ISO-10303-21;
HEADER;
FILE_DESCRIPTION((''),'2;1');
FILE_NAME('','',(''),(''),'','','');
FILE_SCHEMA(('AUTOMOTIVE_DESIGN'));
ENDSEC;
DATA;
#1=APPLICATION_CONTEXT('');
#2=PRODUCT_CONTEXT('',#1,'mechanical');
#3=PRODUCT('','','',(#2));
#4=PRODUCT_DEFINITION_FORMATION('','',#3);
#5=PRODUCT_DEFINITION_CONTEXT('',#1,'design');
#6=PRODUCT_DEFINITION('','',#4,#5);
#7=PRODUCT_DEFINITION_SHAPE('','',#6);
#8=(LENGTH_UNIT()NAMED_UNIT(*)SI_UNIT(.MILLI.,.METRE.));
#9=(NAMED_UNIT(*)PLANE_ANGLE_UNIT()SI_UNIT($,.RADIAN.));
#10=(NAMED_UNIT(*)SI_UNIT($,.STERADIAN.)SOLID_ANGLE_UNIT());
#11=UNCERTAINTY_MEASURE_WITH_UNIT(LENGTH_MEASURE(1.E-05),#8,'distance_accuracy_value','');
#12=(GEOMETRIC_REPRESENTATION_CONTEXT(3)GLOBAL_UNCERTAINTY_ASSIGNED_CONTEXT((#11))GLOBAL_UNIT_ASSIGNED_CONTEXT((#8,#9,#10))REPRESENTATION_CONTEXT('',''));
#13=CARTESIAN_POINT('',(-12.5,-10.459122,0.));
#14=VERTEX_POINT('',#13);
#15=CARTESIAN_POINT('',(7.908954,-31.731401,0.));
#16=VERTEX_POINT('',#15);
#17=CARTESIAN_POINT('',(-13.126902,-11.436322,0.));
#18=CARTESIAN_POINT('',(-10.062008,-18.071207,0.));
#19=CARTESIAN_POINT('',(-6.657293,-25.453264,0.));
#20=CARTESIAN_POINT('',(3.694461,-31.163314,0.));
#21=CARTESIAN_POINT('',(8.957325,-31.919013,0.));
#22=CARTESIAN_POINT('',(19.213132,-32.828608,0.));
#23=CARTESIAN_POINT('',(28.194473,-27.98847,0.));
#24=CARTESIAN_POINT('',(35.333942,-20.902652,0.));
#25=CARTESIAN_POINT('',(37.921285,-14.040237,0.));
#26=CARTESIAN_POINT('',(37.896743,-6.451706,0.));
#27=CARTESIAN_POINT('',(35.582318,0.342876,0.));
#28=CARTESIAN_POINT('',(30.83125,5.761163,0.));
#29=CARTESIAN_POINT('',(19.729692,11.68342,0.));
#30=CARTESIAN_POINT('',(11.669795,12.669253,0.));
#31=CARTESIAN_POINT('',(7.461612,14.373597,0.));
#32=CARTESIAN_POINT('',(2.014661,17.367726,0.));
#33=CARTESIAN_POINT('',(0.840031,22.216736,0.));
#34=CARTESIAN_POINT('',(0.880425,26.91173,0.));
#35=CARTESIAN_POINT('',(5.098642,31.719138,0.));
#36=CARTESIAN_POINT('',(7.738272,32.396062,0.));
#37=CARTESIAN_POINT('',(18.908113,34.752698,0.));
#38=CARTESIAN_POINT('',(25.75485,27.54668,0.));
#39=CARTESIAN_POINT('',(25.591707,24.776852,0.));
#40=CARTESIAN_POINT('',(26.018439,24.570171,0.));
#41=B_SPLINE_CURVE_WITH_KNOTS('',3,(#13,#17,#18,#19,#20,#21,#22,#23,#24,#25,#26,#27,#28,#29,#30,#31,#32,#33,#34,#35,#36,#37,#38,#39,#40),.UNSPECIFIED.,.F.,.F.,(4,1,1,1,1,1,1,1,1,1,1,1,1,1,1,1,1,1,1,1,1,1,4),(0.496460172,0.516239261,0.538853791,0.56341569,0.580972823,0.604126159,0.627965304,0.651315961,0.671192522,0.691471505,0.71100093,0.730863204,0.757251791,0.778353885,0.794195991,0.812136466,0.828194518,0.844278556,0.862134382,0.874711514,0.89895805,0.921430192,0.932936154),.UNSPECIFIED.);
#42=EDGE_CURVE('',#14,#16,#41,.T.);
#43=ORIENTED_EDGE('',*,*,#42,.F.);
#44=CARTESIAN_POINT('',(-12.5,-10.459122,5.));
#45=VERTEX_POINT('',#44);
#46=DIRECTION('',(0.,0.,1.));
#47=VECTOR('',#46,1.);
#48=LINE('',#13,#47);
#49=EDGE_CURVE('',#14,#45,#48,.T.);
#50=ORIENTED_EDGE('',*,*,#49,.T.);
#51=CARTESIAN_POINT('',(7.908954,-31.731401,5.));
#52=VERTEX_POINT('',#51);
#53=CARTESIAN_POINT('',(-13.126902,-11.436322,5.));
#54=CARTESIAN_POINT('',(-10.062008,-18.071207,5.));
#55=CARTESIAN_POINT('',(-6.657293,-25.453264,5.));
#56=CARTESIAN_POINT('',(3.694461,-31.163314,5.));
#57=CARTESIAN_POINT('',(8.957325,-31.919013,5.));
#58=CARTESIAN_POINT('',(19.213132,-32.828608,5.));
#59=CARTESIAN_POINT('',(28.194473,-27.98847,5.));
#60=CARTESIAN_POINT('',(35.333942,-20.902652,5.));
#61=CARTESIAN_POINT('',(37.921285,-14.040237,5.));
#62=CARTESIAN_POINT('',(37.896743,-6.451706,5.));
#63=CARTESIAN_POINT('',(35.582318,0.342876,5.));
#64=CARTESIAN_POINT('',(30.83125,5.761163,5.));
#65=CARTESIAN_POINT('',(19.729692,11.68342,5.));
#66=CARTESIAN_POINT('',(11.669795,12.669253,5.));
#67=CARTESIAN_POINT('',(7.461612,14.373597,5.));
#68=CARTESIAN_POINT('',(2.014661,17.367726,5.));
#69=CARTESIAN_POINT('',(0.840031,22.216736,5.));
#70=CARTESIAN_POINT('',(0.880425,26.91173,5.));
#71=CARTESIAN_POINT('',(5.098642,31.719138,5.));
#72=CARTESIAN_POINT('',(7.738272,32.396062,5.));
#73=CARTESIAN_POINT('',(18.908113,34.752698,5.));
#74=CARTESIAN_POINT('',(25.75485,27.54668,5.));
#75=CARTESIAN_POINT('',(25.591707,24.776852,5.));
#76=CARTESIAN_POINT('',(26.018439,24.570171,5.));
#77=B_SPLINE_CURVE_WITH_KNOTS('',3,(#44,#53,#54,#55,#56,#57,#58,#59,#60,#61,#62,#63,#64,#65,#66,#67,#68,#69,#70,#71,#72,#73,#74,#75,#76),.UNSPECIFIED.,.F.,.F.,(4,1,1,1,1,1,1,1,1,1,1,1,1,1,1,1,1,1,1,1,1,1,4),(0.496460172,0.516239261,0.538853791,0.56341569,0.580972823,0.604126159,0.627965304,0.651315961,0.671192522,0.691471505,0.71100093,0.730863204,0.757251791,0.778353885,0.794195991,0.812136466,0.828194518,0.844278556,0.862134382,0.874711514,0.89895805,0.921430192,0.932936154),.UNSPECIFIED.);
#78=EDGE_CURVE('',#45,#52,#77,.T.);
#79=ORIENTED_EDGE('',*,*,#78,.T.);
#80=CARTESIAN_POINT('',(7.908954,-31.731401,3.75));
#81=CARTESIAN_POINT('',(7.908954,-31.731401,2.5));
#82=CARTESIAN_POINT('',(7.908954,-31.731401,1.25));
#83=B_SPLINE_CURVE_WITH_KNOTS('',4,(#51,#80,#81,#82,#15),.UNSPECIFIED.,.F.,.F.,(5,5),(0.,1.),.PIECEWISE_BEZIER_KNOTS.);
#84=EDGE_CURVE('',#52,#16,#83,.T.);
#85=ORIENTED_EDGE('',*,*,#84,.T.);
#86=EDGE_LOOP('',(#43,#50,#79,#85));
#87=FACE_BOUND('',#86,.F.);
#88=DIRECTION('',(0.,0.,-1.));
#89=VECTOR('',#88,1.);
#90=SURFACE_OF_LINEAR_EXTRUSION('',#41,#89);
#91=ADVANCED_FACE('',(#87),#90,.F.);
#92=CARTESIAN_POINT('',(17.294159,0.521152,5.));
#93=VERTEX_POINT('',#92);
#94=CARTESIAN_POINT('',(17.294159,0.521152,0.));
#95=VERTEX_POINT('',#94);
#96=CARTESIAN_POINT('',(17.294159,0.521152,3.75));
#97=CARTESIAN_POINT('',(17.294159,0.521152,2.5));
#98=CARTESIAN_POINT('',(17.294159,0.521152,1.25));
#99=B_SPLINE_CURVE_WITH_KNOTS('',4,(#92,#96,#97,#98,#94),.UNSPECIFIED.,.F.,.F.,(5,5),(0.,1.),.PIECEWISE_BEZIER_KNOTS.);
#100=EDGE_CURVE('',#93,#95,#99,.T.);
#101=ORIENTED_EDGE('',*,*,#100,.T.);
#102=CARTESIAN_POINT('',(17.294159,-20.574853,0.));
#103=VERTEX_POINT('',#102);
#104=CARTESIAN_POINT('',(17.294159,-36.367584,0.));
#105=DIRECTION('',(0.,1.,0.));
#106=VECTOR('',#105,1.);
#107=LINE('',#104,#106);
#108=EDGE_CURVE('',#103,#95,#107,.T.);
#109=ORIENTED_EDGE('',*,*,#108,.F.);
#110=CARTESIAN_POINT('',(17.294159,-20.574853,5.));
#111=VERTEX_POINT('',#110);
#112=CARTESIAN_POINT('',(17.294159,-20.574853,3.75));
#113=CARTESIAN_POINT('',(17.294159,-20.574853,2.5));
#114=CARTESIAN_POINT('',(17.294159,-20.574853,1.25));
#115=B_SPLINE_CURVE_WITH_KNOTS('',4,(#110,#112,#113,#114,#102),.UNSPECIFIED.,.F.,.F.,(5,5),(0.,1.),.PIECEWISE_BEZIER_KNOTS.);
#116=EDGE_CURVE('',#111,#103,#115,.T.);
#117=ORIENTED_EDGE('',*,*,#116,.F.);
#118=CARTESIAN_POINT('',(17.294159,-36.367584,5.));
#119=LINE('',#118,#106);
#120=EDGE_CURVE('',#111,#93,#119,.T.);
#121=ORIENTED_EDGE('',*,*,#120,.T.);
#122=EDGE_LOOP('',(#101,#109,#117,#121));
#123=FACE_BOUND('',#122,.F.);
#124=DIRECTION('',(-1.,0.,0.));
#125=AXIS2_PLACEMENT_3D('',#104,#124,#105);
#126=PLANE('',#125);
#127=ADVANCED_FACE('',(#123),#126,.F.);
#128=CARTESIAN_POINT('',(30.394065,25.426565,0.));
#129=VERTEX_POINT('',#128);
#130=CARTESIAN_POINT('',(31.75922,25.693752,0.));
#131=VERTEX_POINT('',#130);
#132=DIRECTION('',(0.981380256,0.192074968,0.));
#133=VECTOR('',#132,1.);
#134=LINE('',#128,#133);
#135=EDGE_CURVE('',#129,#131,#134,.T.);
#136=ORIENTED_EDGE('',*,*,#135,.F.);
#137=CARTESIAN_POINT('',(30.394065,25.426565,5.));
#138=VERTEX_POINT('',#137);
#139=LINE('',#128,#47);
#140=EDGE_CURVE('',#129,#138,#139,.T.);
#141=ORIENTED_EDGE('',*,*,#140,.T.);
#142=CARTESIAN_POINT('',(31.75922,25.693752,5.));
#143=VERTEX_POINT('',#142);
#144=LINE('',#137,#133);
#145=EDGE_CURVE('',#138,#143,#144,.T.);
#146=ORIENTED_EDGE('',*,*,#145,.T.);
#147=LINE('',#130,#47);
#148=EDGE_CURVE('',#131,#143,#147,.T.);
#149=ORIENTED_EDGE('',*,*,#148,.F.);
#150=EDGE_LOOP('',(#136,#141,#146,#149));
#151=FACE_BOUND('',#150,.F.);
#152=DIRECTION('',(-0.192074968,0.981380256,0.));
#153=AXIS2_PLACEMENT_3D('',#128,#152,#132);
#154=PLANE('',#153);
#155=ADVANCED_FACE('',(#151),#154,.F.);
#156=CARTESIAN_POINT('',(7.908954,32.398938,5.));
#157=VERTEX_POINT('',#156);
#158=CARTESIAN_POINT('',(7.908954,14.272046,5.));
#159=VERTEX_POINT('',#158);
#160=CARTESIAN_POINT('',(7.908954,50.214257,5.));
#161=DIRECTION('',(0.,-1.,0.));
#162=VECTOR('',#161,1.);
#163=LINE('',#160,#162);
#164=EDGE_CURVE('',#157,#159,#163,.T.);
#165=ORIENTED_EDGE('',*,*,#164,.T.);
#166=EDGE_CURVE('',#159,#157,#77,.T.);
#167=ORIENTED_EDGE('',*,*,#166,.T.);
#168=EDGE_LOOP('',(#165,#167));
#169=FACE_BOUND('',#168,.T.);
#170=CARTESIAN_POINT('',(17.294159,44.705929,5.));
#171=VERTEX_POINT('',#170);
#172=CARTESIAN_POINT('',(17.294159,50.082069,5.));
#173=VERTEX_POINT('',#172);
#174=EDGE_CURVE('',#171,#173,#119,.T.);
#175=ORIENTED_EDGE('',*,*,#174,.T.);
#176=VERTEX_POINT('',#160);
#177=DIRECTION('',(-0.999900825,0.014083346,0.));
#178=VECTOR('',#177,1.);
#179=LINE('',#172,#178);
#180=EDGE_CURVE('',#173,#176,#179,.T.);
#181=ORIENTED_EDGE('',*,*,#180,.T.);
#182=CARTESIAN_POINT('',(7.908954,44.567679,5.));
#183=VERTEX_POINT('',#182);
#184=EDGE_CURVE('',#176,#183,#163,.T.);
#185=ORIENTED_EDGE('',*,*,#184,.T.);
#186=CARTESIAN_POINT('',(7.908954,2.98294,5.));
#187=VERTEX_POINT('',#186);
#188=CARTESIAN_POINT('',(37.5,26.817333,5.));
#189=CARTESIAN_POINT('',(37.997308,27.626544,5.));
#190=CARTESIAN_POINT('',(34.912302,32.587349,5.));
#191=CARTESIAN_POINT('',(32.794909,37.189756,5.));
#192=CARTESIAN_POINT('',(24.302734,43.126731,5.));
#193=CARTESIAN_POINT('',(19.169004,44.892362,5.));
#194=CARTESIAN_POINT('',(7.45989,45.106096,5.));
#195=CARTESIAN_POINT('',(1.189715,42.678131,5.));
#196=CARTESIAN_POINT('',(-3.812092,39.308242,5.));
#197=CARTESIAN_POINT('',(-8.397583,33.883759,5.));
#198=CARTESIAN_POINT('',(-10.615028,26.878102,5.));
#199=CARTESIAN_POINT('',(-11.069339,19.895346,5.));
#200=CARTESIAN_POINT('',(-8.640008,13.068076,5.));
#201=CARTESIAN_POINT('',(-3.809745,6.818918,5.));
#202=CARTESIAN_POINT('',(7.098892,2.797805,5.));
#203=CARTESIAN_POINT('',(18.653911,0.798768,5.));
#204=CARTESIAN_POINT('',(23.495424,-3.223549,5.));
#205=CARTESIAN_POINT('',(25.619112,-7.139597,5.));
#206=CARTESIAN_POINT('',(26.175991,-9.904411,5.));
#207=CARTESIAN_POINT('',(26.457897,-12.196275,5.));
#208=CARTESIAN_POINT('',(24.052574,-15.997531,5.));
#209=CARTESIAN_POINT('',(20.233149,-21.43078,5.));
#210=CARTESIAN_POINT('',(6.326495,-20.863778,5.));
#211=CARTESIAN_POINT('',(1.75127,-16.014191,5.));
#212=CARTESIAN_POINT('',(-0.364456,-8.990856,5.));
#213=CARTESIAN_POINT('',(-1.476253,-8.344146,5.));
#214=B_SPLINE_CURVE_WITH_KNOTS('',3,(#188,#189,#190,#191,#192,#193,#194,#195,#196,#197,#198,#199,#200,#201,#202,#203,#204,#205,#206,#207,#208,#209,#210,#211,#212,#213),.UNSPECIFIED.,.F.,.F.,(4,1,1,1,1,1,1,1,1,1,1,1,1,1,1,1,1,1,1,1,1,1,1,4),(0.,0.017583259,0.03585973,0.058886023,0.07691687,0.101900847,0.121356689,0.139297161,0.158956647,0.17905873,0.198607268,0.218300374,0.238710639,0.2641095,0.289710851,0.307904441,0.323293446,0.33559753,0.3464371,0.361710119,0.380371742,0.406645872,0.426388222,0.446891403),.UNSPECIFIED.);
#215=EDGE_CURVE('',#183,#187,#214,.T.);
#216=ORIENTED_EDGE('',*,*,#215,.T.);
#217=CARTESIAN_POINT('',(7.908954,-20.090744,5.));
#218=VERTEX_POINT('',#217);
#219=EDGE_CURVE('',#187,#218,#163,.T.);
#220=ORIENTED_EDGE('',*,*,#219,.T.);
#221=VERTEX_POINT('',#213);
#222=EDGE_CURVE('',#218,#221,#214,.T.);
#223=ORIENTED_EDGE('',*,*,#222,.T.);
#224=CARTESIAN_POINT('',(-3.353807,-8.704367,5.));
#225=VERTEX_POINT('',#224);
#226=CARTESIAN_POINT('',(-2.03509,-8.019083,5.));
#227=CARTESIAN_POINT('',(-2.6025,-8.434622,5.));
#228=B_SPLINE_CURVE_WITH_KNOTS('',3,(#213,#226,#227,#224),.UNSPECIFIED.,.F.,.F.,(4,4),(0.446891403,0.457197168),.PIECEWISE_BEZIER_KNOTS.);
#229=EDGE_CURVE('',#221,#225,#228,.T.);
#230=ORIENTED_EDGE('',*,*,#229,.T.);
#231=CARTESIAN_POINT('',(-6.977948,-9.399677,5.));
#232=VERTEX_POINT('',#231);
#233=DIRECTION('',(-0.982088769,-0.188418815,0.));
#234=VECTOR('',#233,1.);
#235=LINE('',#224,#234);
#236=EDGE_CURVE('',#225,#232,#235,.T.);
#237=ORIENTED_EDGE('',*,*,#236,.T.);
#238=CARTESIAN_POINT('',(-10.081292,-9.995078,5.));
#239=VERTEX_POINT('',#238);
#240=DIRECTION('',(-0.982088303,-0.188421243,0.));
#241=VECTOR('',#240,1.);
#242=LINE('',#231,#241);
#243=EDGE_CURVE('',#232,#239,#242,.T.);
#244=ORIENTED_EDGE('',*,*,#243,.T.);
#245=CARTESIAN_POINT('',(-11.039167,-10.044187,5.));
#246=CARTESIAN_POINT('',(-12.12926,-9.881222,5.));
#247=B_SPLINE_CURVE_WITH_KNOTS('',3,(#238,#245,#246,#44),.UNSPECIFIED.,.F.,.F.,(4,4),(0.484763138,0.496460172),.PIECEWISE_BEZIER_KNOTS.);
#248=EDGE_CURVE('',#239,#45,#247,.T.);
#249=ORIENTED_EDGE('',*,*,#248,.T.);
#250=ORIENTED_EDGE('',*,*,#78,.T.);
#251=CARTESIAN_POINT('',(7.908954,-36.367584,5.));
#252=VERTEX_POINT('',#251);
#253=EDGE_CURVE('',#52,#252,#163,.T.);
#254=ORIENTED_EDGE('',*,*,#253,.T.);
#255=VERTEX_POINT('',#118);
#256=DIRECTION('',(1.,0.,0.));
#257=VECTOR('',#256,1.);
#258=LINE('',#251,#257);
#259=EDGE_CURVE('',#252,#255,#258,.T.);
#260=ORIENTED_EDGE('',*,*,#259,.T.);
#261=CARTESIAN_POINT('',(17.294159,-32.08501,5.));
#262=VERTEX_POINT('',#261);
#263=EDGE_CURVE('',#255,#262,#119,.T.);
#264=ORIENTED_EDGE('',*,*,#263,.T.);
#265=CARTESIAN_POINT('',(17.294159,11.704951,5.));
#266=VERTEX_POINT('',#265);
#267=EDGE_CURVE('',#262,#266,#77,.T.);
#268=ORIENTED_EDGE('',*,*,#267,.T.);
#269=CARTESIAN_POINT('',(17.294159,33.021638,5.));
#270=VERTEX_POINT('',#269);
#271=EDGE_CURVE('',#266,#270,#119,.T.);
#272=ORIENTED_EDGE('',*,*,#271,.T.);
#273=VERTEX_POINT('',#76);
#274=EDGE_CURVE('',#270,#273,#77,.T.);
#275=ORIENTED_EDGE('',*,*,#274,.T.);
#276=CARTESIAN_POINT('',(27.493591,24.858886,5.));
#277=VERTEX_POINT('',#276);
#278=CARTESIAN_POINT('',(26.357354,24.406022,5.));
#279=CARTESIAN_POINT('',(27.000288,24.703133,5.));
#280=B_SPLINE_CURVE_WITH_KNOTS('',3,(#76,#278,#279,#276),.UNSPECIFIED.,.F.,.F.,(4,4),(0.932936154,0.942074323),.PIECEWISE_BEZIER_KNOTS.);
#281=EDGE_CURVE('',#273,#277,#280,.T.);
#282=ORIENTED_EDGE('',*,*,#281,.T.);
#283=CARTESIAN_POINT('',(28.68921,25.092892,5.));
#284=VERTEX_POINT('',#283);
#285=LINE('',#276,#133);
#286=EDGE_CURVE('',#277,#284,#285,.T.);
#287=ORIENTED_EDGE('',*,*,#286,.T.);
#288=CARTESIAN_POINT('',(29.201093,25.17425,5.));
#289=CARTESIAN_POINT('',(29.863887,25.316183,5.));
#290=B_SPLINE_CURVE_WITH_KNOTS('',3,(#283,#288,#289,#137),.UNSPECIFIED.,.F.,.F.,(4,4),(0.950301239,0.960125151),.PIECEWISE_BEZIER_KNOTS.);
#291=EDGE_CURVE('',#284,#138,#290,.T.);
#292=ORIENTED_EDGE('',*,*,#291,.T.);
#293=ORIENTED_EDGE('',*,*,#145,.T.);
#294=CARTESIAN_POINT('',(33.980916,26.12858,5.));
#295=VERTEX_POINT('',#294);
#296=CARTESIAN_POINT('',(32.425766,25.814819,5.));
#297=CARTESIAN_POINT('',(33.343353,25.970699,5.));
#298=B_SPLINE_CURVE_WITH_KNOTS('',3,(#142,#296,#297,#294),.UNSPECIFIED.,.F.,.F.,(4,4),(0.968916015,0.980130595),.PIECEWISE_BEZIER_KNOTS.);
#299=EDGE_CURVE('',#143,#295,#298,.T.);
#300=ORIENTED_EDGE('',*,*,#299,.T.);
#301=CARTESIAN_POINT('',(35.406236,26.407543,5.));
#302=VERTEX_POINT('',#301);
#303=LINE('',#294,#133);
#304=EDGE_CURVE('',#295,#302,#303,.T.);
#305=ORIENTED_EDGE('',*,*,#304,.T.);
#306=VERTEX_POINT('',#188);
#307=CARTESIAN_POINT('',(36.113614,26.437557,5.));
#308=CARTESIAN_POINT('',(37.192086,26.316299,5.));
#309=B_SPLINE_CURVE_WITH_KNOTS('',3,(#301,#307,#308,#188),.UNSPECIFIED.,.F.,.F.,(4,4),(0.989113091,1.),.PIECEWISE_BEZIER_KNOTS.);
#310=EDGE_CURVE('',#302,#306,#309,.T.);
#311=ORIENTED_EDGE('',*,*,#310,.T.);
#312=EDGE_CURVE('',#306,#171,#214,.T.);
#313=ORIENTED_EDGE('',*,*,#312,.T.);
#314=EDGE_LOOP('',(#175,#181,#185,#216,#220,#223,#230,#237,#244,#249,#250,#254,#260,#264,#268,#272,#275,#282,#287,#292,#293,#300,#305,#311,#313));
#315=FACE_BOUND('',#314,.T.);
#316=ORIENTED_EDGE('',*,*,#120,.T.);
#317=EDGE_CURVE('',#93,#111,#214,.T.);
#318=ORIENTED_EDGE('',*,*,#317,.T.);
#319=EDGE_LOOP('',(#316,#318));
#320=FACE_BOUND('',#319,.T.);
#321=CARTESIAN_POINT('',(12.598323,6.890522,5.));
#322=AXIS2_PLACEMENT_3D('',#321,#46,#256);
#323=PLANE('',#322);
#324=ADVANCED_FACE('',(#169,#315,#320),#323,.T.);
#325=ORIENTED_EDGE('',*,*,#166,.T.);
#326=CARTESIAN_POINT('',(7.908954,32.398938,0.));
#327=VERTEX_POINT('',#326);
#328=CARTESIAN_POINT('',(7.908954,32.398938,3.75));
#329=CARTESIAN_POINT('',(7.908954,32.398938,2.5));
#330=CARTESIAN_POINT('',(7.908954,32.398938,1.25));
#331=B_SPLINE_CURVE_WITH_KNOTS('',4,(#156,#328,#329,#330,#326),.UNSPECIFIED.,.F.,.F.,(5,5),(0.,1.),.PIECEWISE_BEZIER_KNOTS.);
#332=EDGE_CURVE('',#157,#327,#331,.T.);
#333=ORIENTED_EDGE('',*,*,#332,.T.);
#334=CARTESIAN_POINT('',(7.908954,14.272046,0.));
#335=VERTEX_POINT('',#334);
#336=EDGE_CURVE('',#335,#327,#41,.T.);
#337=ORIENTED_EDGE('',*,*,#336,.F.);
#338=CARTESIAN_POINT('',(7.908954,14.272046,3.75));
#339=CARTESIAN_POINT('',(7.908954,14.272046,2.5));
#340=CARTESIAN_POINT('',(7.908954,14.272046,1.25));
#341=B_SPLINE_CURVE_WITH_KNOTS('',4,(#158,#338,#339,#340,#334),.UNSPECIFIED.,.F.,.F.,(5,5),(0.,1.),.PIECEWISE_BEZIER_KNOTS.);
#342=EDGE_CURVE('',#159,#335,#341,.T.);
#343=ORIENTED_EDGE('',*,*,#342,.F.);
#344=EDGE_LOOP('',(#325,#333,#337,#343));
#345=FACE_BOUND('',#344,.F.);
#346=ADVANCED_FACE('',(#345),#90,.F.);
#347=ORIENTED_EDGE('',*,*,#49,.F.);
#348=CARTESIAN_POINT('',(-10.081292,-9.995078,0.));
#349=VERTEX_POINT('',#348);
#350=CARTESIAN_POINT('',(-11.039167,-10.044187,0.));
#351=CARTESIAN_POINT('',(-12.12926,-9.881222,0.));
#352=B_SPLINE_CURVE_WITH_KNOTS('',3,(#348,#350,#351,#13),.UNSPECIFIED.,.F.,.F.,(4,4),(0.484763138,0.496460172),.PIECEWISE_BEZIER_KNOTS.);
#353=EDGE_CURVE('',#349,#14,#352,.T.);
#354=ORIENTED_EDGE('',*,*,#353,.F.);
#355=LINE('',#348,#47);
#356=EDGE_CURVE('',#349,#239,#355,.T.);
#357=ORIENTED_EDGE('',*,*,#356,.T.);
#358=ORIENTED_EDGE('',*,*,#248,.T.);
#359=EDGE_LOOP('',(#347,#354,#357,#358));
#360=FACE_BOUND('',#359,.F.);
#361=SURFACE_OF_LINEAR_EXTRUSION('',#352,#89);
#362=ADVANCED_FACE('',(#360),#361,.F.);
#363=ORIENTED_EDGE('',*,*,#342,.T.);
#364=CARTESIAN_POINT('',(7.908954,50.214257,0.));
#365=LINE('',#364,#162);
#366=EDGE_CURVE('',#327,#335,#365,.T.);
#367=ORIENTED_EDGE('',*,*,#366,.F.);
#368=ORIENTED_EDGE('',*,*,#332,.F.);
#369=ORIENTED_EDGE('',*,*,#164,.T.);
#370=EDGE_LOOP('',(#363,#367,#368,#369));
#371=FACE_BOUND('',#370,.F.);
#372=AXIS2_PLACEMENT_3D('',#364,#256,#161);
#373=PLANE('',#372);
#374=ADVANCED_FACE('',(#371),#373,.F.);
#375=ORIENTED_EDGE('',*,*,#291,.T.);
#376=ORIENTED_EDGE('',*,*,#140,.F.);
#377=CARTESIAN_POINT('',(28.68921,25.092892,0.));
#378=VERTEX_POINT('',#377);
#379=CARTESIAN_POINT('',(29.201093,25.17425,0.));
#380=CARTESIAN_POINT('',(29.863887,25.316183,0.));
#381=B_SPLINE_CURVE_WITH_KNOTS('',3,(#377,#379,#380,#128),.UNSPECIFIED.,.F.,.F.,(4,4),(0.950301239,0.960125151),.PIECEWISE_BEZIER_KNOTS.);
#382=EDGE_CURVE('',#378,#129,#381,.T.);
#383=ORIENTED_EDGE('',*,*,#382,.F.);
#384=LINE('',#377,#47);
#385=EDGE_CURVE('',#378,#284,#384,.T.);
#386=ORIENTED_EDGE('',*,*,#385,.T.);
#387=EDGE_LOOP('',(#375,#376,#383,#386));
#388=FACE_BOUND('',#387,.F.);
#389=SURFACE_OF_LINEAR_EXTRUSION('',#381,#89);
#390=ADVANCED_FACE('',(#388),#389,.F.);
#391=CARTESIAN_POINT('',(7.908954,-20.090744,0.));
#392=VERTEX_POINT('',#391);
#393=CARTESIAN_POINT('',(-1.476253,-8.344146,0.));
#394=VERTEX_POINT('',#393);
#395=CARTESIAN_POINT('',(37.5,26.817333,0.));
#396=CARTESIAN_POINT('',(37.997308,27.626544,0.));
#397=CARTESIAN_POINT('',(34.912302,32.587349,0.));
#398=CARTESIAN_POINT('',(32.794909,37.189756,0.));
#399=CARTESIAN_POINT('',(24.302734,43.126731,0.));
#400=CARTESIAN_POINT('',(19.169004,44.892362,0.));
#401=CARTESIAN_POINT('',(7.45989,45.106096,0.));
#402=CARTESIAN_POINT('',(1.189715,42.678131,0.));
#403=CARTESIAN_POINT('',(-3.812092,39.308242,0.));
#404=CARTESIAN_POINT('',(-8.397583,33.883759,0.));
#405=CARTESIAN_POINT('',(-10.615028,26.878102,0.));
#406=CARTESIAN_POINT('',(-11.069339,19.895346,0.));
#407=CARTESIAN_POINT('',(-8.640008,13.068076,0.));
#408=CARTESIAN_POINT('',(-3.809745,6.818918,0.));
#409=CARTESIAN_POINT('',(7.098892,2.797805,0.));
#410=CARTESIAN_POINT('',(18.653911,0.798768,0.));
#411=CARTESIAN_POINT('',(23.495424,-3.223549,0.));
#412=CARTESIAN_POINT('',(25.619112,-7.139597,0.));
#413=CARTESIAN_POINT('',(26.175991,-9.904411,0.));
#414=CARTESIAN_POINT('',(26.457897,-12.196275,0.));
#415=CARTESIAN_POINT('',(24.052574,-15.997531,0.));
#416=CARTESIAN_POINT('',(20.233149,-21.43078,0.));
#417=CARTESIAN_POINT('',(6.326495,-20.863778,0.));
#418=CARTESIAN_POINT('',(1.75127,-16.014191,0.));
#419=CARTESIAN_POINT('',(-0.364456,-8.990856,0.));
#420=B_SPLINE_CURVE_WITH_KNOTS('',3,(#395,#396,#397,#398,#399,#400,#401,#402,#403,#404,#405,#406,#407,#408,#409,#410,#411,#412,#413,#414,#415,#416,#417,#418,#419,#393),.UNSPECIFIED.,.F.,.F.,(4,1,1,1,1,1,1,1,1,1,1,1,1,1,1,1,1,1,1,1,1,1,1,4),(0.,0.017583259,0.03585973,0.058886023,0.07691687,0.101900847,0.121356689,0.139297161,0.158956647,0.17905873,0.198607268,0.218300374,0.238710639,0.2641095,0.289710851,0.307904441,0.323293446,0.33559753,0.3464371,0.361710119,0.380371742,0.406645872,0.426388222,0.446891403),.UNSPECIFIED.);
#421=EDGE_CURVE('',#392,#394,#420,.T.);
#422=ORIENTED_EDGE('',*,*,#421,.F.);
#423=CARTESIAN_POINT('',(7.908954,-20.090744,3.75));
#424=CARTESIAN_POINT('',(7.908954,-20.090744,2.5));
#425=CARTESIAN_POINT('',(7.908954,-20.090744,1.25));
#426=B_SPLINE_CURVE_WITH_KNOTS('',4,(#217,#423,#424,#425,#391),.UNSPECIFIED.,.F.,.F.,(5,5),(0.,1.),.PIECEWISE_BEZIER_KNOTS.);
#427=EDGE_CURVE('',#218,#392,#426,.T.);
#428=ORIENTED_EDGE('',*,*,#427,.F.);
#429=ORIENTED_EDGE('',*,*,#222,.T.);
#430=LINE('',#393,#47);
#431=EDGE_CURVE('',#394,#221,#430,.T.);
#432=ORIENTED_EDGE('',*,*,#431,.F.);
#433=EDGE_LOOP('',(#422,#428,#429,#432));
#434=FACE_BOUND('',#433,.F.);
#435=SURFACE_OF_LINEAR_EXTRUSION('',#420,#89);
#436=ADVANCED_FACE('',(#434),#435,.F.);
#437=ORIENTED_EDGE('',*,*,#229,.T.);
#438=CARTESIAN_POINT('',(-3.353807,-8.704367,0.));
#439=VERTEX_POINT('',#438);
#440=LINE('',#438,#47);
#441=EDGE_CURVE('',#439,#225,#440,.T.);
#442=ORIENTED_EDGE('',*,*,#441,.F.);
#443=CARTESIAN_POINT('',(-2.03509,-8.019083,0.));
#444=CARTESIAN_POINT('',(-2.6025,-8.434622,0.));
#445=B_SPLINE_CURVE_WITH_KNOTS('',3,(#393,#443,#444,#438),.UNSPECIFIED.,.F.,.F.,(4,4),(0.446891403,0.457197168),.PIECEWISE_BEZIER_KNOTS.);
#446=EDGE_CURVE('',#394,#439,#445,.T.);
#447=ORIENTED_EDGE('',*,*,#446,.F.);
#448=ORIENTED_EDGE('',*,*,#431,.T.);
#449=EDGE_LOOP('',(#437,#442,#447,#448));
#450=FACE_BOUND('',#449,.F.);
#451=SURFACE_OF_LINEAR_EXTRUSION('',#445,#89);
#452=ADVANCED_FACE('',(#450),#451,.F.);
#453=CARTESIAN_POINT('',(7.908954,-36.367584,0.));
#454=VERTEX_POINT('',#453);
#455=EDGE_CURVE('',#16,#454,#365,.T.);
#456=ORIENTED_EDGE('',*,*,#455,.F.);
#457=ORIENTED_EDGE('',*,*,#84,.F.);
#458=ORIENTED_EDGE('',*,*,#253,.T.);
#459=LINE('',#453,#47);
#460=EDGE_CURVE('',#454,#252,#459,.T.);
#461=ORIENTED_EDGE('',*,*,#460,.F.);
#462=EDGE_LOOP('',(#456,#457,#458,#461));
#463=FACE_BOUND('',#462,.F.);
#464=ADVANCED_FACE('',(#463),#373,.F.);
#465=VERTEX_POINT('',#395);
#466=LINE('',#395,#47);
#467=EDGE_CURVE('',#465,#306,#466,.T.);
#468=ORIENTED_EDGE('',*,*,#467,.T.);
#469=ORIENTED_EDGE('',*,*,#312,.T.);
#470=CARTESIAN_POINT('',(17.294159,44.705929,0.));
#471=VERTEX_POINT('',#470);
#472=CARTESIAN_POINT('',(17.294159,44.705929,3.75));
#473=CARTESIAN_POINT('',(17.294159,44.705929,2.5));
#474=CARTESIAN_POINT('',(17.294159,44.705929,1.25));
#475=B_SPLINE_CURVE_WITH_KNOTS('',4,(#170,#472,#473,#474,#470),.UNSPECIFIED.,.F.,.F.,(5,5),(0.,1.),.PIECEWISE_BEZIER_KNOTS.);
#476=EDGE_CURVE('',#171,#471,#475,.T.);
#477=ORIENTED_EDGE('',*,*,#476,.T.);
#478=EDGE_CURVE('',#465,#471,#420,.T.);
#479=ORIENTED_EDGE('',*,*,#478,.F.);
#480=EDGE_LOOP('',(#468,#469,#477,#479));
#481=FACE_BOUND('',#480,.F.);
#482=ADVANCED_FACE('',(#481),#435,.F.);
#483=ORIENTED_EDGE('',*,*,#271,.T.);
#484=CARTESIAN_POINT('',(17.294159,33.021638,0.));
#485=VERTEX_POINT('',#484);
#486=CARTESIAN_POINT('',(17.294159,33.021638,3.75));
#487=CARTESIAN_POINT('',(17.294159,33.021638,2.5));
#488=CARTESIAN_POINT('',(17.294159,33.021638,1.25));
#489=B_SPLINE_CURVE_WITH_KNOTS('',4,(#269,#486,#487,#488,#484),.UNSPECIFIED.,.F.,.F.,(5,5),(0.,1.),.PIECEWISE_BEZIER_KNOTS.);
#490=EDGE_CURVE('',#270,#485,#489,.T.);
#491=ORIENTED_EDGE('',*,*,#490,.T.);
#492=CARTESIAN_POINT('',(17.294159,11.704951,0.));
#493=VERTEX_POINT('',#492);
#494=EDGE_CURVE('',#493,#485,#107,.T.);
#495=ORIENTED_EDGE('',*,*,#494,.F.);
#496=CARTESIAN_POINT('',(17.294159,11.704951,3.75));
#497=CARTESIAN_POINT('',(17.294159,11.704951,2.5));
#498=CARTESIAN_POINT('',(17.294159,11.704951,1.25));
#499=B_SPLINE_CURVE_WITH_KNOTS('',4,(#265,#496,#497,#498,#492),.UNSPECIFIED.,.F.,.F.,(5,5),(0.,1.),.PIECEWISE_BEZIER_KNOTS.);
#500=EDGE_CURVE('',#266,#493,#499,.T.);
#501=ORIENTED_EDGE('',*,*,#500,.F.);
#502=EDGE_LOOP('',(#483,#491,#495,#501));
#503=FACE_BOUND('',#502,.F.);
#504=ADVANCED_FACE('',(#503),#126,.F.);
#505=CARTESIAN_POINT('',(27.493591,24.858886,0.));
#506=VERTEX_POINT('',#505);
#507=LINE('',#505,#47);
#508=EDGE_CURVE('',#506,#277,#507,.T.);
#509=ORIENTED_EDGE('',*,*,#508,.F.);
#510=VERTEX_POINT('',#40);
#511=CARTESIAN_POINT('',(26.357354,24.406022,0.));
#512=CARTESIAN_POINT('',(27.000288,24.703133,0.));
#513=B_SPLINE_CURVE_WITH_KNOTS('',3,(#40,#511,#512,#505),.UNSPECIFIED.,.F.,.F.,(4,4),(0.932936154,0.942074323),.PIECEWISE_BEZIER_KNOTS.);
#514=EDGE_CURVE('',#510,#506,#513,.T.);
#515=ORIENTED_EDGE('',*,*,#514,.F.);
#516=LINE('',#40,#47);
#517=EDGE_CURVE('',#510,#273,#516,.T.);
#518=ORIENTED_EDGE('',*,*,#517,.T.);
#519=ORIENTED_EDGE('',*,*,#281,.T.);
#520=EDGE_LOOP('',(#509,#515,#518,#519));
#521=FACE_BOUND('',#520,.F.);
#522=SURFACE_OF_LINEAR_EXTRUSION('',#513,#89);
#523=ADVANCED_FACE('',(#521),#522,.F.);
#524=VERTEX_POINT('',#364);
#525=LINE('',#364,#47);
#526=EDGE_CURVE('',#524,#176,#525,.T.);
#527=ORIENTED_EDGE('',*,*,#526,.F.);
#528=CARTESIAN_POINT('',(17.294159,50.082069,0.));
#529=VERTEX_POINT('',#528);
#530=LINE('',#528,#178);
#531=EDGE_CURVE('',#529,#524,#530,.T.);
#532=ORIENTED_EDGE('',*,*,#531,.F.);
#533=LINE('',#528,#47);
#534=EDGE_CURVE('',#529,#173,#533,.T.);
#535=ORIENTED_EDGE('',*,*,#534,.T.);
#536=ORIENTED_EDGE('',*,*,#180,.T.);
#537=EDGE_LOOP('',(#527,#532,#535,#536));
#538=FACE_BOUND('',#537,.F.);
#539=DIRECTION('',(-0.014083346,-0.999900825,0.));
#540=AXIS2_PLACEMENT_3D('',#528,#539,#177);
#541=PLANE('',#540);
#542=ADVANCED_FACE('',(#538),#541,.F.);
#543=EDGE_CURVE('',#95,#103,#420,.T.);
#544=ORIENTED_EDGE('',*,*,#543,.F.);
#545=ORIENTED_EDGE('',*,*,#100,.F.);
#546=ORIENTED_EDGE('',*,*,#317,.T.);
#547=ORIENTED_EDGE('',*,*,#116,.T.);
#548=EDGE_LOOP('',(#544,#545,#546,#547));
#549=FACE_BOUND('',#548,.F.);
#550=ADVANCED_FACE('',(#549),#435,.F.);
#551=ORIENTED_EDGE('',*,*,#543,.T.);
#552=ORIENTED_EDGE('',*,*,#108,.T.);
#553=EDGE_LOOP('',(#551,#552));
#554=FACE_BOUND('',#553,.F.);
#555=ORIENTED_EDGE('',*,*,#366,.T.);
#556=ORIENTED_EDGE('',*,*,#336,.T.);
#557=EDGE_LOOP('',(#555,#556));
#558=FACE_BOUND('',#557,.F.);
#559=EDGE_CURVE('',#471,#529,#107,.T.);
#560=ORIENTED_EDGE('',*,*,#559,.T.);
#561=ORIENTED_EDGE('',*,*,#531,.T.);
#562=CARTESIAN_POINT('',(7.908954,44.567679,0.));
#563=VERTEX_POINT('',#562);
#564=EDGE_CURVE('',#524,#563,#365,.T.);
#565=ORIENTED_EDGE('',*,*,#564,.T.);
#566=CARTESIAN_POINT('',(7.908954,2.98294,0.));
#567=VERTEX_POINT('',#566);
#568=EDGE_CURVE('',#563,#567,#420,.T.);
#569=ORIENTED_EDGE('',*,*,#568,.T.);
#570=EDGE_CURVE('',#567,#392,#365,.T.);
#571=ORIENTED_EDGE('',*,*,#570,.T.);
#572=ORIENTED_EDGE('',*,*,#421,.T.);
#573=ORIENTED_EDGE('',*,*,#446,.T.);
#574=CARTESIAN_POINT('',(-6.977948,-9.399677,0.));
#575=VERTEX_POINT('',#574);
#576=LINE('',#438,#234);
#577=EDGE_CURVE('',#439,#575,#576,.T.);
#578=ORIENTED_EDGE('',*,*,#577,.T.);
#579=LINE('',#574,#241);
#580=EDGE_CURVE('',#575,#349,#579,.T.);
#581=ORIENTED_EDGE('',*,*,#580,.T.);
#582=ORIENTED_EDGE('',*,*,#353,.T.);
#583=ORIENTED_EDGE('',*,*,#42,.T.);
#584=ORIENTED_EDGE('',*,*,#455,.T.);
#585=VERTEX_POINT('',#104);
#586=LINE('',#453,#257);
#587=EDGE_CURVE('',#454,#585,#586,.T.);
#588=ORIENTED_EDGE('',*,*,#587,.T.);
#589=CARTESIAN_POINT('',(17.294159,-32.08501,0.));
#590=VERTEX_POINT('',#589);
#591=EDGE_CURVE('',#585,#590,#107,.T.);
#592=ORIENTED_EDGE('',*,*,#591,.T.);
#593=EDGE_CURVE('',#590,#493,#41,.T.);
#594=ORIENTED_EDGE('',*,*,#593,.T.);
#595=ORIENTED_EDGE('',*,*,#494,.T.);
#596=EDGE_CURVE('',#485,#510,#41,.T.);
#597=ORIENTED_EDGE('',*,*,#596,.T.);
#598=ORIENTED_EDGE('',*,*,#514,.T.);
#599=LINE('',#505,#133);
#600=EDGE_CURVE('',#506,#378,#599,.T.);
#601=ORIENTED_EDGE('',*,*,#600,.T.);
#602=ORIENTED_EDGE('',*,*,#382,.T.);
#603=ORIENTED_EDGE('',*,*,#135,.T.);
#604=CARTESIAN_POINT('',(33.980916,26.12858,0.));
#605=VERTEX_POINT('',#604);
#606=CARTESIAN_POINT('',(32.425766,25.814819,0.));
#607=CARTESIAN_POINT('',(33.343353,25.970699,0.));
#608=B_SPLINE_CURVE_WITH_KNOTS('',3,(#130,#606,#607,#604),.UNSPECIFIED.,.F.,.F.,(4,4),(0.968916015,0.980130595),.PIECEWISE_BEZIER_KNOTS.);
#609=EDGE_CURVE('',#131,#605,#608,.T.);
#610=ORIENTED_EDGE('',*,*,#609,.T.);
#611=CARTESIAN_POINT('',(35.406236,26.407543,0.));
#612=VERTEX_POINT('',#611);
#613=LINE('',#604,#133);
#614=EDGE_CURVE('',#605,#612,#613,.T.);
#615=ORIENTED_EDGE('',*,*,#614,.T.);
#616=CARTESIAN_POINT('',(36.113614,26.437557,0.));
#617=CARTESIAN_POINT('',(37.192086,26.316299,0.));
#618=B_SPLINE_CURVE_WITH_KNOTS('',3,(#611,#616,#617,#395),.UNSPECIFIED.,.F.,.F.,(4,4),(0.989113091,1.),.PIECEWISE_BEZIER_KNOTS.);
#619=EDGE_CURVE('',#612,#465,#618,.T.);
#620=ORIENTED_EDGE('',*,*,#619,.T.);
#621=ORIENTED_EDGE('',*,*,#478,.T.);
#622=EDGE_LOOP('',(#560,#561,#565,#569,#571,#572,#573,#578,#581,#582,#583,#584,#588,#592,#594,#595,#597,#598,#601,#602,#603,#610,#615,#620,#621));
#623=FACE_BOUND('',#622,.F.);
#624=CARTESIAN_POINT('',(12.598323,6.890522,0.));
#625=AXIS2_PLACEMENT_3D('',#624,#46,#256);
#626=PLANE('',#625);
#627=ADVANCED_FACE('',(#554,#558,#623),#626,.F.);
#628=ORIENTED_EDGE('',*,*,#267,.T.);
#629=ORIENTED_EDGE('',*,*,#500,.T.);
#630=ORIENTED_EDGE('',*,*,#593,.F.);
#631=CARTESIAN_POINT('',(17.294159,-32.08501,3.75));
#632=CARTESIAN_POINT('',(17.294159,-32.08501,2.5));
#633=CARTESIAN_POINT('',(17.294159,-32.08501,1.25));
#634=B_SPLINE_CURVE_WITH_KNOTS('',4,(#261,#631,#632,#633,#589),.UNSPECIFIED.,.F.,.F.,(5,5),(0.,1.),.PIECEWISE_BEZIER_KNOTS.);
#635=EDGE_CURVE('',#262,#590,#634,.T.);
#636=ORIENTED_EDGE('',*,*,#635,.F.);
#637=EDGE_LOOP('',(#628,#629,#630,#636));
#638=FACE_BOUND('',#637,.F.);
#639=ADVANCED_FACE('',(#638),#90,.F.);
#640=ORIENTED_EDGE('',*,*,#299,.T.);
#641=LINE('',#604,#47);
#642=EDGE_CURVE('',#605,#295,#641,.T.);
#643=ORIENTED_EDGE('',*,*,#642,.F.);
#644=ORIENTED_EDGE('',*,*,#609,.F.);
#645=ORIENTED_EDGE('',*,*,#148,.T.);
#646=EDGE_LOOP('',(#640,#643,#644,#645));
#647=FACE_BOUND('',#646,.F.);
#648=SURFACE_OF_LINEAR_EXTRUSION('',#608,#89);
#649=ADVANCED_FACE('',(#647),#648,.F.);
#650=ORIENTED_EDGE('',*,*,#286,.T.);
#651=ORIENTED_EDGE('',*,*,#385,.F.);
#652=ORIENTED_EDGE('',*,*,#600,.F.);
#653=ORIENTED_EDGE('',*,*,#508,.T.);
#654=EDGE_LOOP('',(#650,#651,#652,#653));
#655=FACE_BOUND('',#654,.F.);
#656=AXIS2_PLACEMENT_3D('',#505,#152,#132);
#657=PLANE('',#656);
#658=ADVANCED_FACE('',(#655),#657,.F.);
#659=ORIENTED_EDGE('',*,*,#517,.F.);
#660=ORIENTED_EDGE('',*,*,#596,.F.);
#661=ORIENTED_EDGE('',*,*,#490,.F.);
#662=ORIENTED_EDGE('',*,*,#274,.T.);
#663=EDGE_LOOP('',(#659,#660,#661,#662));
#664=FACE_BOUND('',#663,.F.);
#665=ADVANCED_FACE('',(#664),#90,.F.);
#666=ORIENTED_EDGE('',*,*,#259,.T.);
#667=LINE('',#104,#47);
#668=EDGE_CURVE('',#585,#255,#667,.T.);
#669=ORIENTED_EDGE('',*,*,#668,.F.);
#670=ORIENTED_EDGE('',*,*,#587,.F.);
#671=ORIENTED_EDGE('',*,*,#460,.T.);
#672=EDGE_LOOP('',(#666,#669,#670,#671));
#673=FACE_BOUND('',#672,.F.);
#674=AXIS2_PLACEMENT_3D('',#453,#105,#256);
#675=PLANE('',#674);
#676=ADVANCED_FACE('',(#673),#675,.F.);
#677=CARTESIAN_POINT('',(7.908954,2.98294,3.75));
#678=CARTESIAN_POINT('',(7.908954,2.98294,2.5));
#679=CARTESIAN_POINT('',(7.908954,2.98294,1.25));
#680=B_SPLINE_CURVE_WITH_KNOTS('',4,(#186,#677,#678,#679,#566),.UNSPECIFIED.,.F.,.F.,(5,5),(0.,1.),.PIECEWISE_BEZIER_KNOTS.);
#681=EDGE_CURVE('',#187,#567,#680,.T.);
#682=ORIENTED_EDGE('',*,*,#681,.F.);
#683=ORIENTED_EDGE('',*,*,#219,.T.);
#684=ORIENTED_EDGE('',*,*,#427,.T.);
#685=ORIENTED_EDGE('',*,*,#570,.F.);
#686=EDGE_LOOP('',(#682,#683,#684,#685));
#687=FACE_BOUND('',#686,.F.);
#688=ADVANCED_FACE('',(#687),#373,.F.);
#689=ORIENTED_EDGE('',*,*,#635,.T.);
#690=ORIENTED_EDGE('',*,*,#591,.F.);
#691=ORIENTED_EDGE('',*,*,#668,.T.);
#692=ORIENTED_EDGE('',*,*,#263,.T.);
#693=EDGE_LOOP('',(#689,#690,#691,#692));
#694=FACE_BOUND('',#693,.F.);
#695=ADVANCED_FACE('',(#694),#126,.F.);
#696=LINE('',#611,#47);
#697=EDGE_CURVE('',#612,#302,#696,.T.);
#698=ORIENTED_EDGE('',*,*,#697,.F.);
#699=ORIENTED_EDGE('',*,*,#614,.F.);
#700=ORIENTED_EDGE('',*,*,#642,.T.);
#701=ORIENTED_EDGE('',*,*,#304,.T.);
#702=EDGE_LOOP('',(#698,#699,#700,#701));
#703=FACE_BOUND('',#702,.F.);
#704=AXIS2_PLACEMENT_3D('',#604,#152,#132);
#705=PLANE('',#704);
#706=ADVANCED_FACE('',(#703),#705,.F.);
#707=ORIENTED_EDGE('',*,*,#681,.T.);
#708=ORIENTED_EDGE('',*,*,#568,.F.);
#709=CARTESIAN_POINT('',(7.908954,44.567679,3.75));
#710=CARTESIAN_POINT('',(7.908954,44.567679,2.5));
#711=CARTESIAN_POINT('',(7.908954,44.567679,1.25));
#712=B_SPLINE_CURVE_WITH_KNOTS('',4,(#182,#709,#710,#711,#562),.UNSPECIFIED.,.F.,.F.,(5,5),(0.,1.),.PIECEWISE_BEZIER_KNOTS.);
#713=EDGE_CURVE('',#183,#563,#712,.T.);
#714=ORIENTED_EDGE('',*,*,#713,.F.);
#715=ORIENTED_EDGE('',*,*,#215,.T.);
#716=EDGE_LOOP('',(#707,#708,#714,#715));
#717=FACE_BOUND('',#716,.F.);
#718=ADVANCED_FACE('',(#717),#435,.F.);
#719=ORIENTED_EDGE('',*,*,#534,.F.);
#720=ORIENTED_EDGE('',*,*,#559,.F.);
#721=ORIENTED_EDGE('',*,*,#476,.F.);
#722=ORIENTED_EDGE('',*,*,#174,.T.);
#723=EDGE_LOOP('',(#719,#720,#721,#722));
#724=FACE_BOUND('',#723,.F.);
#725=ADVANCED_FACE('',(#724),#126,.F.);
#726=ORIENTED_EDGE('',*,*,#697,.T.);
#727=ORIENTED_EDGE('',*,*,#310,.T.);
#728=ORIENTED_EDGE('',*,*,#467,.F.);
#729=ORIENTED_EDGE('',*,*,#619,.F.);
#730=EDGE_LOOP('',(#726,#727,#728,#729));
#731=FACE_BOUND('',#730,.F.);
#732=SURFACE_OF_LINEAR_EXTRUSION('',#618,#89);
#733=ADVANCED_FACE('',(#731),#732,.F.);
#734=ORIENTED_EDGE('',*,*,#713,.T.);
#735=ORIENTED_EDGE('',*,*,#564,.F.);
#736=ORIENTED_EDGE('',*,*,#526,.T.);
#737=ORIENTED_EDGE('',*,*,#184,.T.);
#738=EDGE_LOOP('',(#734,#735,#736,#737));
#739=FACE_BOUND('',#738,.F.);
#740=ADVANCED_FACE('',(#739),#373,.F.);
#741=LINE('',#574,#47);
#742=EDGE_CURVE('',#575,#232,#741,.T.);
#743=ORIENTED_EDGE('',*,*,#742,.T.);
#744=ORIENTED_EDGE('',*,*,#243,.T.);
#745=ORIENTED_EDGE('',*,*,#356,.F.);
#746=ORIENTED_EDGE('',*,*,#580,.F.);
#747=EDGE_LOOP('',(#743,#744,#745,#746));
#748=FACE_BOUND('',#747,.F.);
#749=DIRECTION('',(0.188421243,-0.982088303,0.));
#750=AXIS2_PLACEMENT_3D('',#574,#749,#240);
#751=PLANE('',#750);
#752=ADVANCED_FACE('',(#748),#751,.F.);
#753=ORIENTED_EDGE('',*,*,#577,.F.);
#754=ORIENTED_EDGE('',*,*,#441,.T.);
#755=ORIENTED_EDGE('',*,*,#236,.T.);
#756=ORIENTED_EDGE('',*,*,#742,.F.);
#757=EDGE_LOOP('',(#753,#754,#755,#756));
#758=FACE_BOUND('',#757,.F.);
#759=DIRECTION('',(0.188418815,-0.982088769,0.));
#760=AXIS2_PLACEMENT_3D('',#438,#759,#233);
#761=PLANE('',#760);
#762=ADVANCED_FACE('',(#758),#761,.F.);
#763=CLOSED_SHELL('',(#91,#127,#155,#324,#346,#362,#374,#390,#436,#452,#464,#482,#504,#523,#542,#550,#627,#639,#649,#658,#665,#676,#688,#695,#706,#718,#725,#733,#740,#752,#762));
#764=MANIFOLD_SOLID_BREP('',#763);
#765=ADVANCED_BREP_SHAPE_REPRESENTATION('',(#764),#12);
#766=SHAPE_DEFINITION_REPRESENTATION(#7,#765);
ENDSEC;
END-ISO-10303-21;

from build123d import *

# Parameters (mm, degrees)
F1_DEPTH = 5
F3_DEPTH = 5


# Not quite as in the source:
# - ends of sketch curves that miss each other by under 0.0002 mm in the source are joined


with BuildPart() as f1:
    # F0 (on Top) → F1 (new body)
    with BuildSketch(Plane.XY):
        with BuildLine():
            add(Edge.make_bspline(
                [(35.4062364212, 26.4075431064), (36.1136138051, 26.4375571122), (37.1920857039, 26.3162993106), (37.5000004827, 26.8173329532)],
                knots=[0.9891130914, 0.9891130914, 0.9891130914, 0.9891130914, 1, 1, 1, 1], degree=3))
            Line((37.5000004827, 26.8173329532), (35.4062364212, 26.4075431064))
        make_face()
        with BuildLine():
            Line((35.4062364212, 26.4075431064), (37.5000004827, 26.8173329532))
            add(Edge.make_bspline(
                [(37.5000004827, 26.8173329532), (37.9973083609, 27.626543796), (34.9123021991, 32.5873489734), (32.7949088716, 37.1897556584), (24.3027338054, 43.1267309099), (19.169003707, 44.8923617288), (7.4598902451, 45.1060959203), (1.1897145625, 42.6781312373), (-3.8120923938, 39.3082420584), (-8.3975827588, 33.8837589271), (-10.6150276555, 26.8781022613), (-11.0693390019, 19.8953460452), (-8.6400083438, 13.0680757921), (-3.8097449962, 6.818918491), (7.098891731, 2.7978051401), (18.6539113372, 0.7987680613), (23.4954239403, -3.2235491862), (25.6191120408, -7.1395973632), (26.1759914014, -9.9044108084), (26.4578971493, -12.1962753352), (24.05257382, -15.9975311089), (20.2331488923, -21.4307798521), (6.3264948767, -20.8637776593), (1.7512699941, -16.0141911602), (-0.3644556238, -8.9908558965), (-1.4762532664, -8.344146423)],
                knots=[0, 0, 0, 0, 0.0175832594, 0.0358597298, 0.0588860231, 0.0769168699, 0.1019008471, 0.1213566894, 0.1392971613, 0.1589566475, 0.1790587295, 0.1986072677, 0.2183003743, 0.2387106394, 0.2641094999, 0.2897108509, 0.3079044406, 0.3232934463, 0.3355975298, 0.3464371002, 0.3617101189, 0.3803717423, 0.4066458723, 0.4263882219, 0.4468914028, 0.4468914028, 0.4468914028, 0.4468914028], degree=3))
            Line((-1.4762532664, -8.344146423), (-3.3538070747, -8.7043670617))
            add(Edge.make_bspline(
                [(-3.3538070747, -8.7043670617), (-4.3961030163, -9.0785878191), (-5.7923316991, -9.172210662), (-6.977947746, -9.3996772122)],
                knots=[0.4571971679, 0.4571971679, 0.4571971679, 0.4571971679, 0.4714944637, 0.4714944637, 0.4714944637, 0.4714944637], degree=3))
            add(Edge.make_bspline(
                [(-6.977947746, -9.3996772122), (-6.9813423589, -9.4003284862), (-8.0810994233, -9.6117855626), (-8.9980666521, -9.939542333), (-10.0812918203, -9.9950777943)],
                knots=[0.4714944637, 0.4714944637, 0.4714944637, 0.4714944637, 0.4715353992, 0.4847631381, 0.4847631381, 0.4847631381, 0.4847631381], degree=3))
            Line((-10.0812918203, -9.9950777943), (-12.4999995173, -10.459122248))
            add(Edge.make_bspline(
                [(-12.4999995173, -10.459122248), (-13.126901554, -11.4363217572), (-10.0620076243, -18.071207169), (-6.6572928739, -25.453264179), (3.6944606077, -31.1633139716), (8.9573246108, -31.9190126967), (19.2131315433, -32.828607643), (28.1944728773, -27.9884701152), (35.3339415951, -20.9026515006), (37.9212850063, -14.0402369382), (37.8967425581, -6.45170622), (35.5823181115, 0.3428764855), (30.8312502632, 5.7611625668), (19.729691585, 11.6834204472), (11.6697951489, 12.6692531996), (7.461612409, 14.3735968882), (2.0146611718, 17.3677263892), (0.8400309809, 22.2167360632), (0.8804248433, 26.9117301401), (5.0986415272, 31.7191380502), (7.7382723724, 32.3960622929), (18.908113489, 34.7526975815), (25.7548504177, 27.5466796426), (25.5917068321, 24.7768521377), (26.0184388608, 24.57017079)],
                knots=[0.4964601716, 0.4964601716, 0.4964601716, 0.4964601716, 0.5162392615, 0.5388537913, 0.5634156905, 0.5809728234, 0.6041261586, 0.627965304, 0.6513159606, 0.6711925222, 0.6914715047, 0.7110009296, 0.7308632035, 0.7572517914, 0.778353885, 0.7941959907, 0.8121364664, 0.8281945183, 0.8442785556, 0.8621343822, 0.874711514, 0.8989580497, 0.9214301919, 0.9329361544, 0.9329361544, 0.9329361544, 0.9329361544], degree=3))
            Line((26.0184388608, 24.57017079), (27.4935914991, 24.8588864981))
            add(Edge.make_bspline(
                [(27.493591499, 24.8588864981), (27.9377033488, 24.9991084414), (28.2605398181, 25.0247596569), (28.689210115, 25.0928920283)],
                knots=[0.9420743235, 0.9420743235, 0.9420743235, 0.9420743235, 0.9503012391, 0.9503012391, 0.9503012391, 0.9503012391], degree=3))
            Line((28.689210115, 25.0928920283), (30.3940653973, 25.4265649563))
            add(Edge.make_bspline(
                [(30.3940653973, 25.4265649563), (30.8684922538, 25.525339568), (31.2367282875, 25.5988500193), (31.7592196718, 25.6937518716)],
                knots=[0.9601251512, 0.9601251512, 0.9601251512, 0.9601251512, 0.9689160154, 0.9689160154, 0.9689160154, 0.9689160154], degree=3))
            Line((31.7592196718, 25.6937518716), (33.9809155123, 26.128580425))
            add(Edge.make_bspline(
                [(33.9809155123, 26.128580425), (34.49158124, 26.255037971), (34.8225983305, 26.3827793559), (35.4062364212, 26.4075431064)],
                knots=[0.9801305953, 0.9801305953, 0.9801305953, 0.9801305953, 0.9891130914, 0.9891130914, 0.9891130914, 0.9891130914], degree=3))
        make_face()
        with BuildLine():
            Line((33.9809155123, 26.128580425), (35.4062364212, 26.4075431064))
            add(Edge.make_bspline(
                [(33.9809155123, 26.128580425), (34.49158124, 26.255037971), (34.8225983305, 26.3827793559), (35.4062364212, 26.4075431064)],
                knots=[0.9801305953, 0.9801305953, 0.9801305953, 0.9801305953, 0.9891130914, 0.9891130914, 0.9891130914, 0.9891130914], degree=3))
        make_face()
        with BuildLine():
            Line((-3.3538070747, -8.7043670617), (-1.4762532664, -8.344146423))
            add(Edge.make_bspline(
                [(-1.4762532664, -8.344146423), (-2.0350897385, -8.0190829163), (-2.6025001683, -8.434621562), (-3.3538070747, -8.7043670617)],
                knots=[0.4468914028, 0.4468914028, 0.4468914028, 0.4468914028, 0.4571971679, 0.4571971679, 0.4571971679, 0.4571971679], degree=3))
        make_face()
        with BuildLine():
            add(Edge.make_bspline(
                [(31.7592196718, 25.6937518716), (32.4257663489, 25.8148189671), (33.3433531298, 25.9706991145), (33.9809155123, 26.128580425)],
                knots=[0.9689160154, 0.9689160154, 0.9689160154, 0.9689160154, 0.9801305953, 0.9801305953, 0.9801305953, 0.9801305953], degree=3))
            Line((33.9809155123, 26.128580425), (31.7592196718, 25.6937518716))
        make_face()
        with BuildLine():
            add(Edge.make_bspline(
                [(-3.3538070747, -8.7043670617), (-4.3961030163, -9.0785878191), (-5.7923316991, -9.172210662), (-6.977947746, -9.3996772122)],
                knots=[0.4571971679, 0.4571971679, 0.4571971679, 0.4571971679, 0.4714944637, 0.4714944637, 0.4714944637, 0.4714944637], degree=3))
            Line((-3.3538070747, -8.7043670617), (-6.977947746, -9.3996772122))
        make_face()
        with BuildLine():
            Line((30.3940653973, 25.4265649563), (31.7592196718, 25.6937518716))
            add(Edge.make_bspline(
                [(30.3940653973, 25.4265649563), (30.8684922538, 25.525339568), (31.2367282875, 25.5988500193), (31.7592196718, 25.6937518716)],
                knots=[0.9601251512, 0.9601251512, 0.9601251512, 0.9601251512, 0.9689160154, 0.9689160154, 0.9689160154, 0.9689160154], degree=3))
        make_face()
        with BuildLine():
            add(Edge.make_bspline(
                [(-6.977947746, -9.3996772122), (-6.9813423589, -9.4003284862), (-8.0810994233, -9.6117855626), (-8.9980666521, -9.939542333), (-10.0812918203, -9.9950777943)],
                knots=[0.4714944637, 0.4714944637, 0.4714944637, 0.4714944637, 0.4715353992, 0.4847631381, 0.4847631381, 0.4847631381, 0.4847631381], degree=3))
            Line((-6.977947746, -9.3996772122), (-10.0812918203, -9.9950777943))
        make_face()
        with BuildLine():
            add(Edge.make_bspline(
                [(28.689210115, 25.0928920283), (29.2010932456, 25.1742501533), (29.8638868401, 25.316182965), (30.3940653973, 25.4265649563)],
                knots=[0.9503012391, 0.9503012391, 0.9503012391, 0.9503012391, 0.9601251512, 0.9601251512, 0.9601251512, 0.9601251512], degree=3))
            Line((30.3940653973, 25.4265649563), (28.689210115, 25.0928920283))
        make_face()
        with BuildLine():
            Line((-12.4999995173, -10.459122248), (-10.0812918203, -9.9950777943))
            add(Edge.make_bspline(
                [(-10.0812918203, -9.9950777943), (-11.0391668712, -10.0441867278), (-12.129259803, -9.8812222802), (-12.4999995173, -10.459122248)],
                knots=[0.4847631381, 0.4847631381, 0.4847631381, 0.4847631381, 0.4964601716, 0.4964601716, 0.4964601716, 0.4964601716], degree=3))
        make_face()
        with BuildLine():
            Line((27.4935914991, 24.8588864981), (28.689210115, 25.0928920283))
            add(Edge.make_bspline(
                [(27.493591499, 24.8588864981), (27.9377033488, 24.9991084414), (28.2605398181, 25.0247596569), (28.689210115, 25.0928920283)],
                knots=[0.9420743235, 0.9420743235, 0.9420743235, 0.9420743235, 0.9503012391, 0.9503012391, 0.9503012391, 0.9503012391], degree=3))
        make_face()
        with BuildLine():
            add(Edge.make_bspline(
                [(26.0184388608, 24.57017079), (26.357354393, 24.4060220637), (27.0002876466, 24.7031328858), (27.493591499, 24.8588864981)],
                knots=[0.9329361544, 0.9329361544, 0.9329361544, 0.9329361544, 0.9420743235, 0.9420743235, 0.9420743235, 0.9420743235], degree=3))
            Line((27.4935914991, 24.8588864981), (26.0184388608, 24.57017079))
        make_face()
    extrude(amount=F1_DEPTH)

    # F2 (on Top) → F3 (join)
    with BuildSketch(Plane.XY):
        Polygon((17.2941591591, 50.0820688903), (7.9089542851, 50.2142570913), (7.9089542851, -36.3675840199), (17.2941591591, -36.3675840199), align=None)
    extrude(amount=F3_DEPTH)


solid = f1.part
